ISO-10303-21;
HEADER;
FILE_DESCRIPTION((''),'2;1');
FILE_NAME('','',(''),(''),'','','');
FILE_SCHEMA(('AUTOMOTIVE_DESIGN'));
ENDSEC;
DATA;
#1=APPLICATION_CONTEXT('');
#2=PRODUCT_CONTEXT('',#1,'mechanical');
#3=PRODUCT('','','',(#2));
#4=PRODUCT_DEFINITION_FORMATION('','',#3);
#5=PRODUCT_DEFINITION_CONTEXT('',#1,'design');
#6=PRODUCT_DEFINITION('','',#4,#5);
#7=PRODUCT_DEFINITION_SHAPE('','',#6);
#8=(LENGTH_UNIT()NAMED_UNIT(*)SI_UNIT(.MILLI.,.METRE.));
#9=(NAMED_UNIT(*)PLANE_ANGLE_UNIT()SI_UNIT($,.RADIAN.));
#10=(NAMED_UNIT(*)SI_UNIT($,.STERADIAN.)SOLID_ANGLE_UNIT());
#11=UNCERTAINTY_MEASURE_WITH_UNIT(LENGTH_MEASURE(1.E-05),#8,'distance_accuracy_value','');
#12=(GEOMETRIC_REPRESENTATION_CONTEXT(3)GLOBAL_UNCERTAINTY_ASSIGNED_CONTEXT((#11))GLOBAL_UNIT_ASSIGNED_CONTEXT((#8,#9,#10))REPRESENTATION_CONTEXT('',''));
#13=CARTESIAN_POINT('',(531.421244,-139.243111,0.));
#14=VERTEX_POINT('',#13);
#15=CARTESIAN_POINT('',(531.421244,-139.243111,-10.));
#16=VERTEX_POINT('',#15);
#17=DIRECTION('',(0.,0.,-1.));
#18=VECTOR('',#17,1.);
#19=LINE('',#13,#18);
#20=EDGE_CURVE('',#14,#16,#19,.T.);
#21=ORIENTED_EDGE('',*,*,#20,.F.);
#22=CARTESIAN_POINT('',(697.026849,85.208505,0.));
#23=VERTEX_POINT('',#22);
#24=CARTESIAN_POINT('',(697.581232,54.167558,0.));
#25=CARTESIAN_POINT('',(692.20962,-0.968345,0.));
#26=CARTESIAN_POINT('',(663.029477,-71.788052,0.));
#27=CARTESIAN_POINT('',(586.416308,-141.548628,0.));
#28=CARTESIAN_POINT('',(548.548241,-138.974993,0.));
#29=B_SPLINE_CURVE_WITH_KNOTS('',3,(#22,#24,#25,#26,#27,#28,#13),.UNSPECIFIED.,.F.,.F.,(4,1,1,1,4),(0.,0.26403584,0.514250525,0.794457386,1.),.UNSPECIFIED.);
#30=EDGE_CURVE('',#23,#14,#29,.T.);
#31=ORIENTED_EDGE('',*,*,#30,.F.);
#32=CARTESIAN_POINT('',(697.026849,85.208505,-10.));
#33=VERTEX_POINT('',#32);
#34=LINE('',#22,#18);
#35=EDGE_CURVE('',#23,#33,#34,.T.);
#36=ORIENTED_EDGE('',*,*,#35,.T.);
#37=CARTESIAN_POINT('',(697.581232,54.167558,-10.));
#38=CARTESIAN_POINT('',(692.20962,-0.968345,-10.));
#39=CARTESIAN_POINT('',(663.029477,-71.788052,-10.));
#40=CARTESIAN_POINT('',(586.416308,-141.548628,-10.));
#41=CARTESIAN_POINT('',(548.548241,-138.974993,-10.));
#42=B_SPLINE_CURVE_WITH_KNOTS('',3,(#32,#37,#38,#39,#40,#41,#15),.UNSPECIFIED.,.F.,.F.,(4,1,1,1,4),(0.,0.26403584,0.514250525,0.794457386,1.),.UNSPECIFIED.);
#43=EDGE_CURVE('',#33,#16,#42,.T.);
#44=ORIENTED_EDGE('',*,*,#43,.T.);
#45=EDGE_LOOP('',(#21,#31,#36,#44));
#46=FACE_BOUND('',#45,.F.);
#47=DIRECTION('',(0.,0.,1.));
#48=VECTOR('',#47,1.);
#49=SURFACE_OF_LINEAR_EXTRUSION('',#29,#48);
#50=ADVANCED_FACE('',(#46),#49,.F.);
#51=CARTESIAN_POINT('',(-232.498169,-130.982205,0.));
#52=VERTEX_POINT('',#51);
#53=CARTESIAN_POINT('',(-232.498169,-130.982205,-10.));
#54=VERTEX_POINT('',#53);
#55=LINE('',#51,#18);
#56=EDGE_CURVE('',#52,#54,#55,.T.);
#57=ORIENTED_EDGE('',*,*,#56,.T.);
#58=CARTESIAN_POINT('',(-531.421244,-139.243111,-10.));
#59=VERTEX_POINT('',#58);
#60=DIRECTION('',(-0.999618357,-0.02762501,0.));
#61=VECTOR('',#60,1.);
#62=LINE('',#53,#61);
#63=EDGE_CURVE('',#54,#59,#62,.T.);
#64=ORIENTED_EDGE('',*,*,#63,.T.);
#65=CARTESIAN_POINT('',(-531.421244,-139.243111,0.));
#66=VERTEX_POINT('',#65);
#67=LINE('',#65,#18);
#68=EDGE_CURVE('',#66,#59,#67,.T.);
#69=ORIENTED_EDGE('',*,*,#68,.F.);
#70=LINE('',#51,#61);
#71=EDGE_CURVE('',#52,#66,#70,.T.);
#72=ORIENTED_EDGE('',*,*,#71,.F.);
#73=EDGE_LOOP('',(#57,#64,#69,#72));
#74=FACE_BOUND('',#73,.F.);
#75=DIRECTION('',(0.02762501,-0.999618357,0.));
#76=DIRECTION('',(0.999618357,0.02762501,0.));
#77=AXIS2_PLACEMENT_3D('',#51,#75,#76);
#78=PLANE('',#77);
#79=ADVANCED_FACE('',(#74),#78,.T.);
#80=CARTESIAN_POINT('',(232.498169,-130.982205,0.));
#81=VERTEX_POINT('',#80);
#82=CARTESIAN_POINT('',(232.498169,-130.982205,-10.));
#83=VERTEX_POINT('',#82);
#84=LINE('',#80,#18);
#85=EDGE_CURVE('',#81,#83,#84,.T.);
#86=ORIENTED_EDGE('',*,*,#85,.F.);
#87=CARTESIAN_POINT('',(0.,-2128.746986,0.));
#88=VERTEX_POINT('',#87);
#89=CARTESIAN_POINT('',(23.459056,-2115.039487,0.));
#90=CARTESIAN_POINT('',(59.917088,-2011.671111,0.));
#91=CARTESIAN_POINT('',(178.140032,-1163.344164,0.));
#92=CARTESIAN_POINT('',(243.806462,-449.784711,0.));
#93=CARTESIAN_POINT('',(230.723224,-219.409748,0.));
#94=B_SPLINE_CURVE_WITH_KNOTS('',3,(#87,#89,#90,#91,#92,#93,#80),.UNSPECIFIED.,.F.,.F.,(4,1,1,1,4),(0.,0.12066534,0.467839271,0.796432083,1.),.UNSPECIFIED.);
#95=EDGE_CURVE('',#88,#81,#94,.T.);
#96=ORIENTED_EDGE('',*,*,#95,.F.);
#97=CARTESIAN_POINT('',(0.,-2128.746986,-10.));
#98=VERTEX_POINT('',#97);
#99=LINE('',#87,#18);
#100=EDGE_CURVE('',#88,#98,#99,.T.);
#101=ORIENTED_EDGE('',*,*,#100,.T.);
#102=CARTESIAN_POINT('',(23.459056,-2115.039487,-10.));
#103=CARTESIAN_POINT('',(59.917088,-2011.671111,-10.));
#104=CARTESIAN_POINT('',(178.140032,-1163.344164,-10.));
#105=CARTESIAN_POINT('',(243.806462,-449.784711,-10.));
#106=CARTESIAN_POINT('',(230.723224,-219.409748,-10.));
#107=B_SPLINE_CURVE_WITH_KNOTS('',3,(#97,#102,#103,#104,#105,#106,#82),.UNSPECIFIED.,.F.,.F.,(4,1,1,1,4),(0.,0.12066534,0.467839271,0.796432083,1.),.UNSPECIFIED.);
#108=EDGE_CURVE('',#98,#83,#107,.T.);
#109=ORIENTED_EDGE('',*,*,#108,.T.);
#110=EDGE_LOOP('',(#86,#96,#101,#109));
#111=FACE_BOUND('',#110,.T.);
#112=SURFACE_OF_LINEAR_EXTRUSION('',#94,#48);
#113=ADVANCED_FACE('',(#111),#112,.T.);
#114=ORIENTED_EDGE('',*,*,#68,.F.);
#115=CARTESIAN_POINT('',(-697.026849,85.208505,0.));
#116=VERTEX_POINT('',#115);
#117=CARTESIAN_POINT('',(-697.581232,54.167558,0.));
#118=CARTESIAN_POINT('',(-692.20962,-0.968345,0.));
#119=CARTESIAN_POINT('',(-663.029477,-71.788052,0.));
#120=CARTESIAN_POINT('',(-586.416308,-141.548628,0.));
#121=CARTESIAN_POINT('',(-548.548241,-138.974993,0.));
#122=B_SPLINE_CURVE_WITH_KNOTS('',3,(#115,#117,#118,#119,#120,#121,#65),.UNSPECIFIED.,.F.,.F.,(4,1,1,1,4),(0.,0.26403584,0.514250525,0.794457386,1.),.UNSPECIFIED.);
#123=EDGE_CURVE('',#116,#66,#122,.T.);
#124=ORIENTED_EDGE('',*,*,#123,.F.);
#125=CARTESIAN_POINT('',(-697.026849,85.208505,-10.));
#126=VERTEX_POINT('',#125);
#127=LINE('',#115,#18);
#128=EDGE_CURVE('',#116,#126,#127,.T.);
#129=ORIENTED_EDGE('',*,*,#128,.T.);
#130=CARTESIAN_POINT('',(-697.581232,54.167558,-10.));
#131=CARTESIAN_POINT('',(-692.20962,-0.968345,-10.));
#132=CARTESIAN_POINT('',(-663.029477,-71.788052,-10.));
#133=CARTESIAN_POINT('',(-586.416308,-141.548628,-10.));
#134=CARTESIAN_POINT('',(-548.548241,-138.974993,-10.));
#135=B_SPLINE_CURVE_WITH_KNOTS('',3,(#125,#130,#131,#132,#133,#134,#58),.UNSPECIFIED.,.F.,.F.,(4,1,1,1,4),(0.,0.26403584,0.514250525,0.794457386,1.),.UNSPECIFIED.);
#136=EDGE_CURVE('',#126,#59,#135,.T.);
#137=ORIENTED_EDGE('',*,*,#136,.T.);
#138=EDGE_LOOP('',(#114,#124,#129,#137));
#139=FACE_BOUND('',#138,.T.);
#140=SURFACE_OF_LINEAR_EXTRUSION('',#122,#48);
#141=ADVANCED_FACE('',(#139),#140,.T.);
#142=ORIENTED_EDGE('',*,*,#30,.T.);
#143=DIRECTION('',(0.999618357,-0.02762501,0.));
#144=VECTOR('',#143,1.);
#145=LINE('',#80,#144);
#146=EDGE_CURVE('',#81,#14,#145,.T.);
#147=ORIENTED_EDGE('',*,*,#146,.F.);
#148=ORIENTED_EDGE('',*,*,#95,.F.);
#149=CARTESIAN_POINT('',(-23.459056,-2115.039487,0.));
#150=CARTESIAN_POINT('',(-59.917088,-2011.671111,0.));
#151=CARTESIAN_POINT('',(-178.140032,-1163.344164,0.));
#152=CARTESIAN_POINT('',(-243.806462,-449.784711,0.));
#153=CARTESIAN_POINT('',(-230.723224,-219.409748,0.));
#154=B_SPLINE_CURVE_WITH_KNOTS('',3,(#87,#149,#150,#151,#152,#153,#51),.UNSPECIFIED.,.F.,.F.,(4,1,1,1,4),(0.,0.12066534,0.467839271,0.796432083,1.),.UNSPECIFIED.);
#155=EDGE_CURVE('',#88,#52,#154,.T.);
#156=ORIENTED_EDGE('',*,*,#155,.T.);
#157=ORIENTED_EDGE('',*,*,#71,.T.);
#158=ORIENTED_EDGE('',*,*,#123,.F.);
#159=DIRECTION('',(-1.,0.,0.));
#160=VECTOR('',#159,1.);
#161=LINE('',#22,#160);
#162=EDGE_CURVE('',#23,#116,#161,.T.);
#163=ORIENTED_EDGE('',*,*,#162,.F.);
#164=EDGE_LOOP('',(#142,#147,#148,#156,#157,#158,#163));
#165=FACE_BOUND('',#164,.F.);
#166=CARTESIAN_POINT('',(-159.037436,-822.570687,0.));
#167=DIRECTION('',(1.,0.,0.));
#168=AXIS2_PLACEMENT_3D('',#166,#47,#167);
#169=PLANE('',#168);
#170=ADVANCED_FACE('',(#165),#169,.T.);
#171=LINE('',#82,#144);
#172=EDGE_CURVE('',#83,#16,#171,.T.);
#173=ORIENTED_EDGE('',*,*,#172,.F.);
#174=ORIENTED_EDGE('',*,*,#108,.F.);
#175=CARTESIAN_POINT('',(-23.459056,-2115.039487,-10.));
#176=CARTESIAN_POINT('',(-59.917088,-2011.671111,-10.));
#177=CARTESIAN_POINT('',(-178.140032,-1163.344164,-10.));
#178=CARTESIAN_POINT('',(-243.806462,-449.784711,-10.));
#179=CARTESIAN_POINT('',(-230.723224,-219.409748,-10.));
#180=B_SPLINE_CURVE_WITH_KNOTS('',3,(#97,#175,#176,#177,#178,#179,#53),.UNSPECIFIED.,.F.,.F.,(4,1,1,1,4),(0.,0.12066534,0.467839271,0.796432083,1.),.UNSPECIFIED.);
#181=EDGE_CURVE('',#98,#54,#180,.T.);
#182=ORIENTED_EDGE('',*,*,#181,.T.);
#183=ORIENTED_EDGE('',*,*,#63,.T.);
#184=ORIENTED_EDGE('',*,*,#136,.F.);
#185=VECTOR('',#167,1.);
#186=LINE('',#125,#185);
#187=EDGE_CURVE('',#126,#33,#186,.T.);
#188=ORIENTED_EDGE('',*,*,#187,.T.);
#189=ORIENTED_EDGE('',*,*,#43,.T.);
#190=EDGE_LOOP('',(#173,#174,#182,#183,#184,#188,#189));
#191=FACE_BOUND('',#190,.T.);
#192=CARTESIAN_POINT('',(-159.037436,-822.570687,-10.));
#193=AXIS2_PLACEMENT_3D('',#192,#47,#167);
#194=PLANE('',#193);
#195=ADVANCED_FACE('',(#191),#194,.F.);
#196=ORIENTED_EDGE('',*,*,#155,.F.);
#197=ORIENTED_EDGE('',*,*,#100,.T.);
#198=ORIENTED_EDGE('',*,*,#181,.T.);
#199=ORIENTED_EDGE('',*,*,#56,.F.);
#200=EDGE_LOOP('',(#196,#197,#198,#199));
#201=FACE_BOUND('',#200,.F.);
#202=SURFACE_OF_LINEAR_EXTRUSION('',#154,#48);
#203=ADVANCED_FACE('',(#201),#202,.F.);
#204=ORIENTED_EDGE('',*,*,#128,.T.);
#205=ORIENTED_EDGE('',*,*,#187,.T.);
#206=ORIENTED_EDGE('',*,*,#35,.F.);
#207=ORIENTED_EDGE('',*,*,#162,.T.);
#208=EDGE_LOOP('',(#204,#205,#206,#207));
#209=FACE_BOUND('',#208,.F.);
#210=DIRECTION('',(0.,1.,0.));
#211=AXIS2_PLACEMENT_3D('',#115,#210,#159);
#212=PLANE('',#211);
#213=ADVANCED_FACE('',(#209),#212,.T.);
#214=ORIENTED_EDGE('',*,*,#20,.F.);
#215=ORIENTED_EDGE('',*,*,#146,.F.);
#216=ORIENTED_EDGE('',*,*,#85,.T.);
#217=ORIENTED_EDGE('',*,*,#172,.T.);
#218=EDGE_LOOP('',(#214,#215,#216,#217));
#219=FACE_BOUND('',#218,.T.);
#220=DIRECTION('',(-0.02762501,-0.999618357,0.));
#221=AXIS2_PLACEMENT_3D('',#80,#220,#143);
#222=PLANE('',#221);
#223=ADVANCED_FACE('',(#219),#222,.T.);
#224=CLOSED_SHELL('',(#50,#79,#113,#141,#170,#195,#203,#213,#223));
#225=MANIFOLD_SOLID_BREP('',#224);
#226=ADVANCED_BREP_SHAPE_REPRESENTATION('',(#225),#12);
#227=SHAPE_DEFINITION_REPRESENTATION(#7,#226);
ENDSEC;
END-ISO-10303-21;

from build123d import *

# Parameters (mm, degrees)
F1_DEPTH = 10


with BuildPart() as f1:
    # F0 (on Top) → F1 (new body)
    with BuildSketch(Plane.XY):
        with BuildLine():
            Line((0, 85.2085053921), (0, -2128.7469863892))
            add(Edge.make_bspline(
                [(0, -2128.7469863892), (23.4590560131, -2115.0394865653), (59.9170876984, -2011.671111051), (178.1400323392, -1163.3441643463), (243.8064615583, -449.7847110684), (230.7232242509, -219.4097479535), (232.4981689453, -130.9822052717)],
                knots=[0, 0, 0, 0, 0.1206653396, 0.4678392709, 0.7964320829, 1, 1, 1, 1], degree=3))
            Line((232.4981689453, -130.9822052717), (531.4212441444, -139.2431110144))
            add(Edge.make_bspline(
                [(697.026848793, 85.2085053921), (697.5812315941, 54.1675575078), (692.2096198324, -0.9683446135), (663.0294773679, -71.7880519639), (586.4163084622, -141.5486278427), (548.5482408364, -138.9749926828), (531.4212441444, -139.2431110144)],
                knots=[0, 0, 0, 0, 0.2640358398, 0.5142505251, 0.7944573855, 1, 1, 1, 1], degree=3))
            Line((697.026848793, 85.2085053921), (0, 85.2085053921))
        make_face()
    extrude(amount=-F1_DEPTH)

    # F2: F1 across plane


with BuildPart() as f1_1:
    add(f1.part)
    add(f1.part.mirror(Plane.YZ))


solid = f1_1.part
